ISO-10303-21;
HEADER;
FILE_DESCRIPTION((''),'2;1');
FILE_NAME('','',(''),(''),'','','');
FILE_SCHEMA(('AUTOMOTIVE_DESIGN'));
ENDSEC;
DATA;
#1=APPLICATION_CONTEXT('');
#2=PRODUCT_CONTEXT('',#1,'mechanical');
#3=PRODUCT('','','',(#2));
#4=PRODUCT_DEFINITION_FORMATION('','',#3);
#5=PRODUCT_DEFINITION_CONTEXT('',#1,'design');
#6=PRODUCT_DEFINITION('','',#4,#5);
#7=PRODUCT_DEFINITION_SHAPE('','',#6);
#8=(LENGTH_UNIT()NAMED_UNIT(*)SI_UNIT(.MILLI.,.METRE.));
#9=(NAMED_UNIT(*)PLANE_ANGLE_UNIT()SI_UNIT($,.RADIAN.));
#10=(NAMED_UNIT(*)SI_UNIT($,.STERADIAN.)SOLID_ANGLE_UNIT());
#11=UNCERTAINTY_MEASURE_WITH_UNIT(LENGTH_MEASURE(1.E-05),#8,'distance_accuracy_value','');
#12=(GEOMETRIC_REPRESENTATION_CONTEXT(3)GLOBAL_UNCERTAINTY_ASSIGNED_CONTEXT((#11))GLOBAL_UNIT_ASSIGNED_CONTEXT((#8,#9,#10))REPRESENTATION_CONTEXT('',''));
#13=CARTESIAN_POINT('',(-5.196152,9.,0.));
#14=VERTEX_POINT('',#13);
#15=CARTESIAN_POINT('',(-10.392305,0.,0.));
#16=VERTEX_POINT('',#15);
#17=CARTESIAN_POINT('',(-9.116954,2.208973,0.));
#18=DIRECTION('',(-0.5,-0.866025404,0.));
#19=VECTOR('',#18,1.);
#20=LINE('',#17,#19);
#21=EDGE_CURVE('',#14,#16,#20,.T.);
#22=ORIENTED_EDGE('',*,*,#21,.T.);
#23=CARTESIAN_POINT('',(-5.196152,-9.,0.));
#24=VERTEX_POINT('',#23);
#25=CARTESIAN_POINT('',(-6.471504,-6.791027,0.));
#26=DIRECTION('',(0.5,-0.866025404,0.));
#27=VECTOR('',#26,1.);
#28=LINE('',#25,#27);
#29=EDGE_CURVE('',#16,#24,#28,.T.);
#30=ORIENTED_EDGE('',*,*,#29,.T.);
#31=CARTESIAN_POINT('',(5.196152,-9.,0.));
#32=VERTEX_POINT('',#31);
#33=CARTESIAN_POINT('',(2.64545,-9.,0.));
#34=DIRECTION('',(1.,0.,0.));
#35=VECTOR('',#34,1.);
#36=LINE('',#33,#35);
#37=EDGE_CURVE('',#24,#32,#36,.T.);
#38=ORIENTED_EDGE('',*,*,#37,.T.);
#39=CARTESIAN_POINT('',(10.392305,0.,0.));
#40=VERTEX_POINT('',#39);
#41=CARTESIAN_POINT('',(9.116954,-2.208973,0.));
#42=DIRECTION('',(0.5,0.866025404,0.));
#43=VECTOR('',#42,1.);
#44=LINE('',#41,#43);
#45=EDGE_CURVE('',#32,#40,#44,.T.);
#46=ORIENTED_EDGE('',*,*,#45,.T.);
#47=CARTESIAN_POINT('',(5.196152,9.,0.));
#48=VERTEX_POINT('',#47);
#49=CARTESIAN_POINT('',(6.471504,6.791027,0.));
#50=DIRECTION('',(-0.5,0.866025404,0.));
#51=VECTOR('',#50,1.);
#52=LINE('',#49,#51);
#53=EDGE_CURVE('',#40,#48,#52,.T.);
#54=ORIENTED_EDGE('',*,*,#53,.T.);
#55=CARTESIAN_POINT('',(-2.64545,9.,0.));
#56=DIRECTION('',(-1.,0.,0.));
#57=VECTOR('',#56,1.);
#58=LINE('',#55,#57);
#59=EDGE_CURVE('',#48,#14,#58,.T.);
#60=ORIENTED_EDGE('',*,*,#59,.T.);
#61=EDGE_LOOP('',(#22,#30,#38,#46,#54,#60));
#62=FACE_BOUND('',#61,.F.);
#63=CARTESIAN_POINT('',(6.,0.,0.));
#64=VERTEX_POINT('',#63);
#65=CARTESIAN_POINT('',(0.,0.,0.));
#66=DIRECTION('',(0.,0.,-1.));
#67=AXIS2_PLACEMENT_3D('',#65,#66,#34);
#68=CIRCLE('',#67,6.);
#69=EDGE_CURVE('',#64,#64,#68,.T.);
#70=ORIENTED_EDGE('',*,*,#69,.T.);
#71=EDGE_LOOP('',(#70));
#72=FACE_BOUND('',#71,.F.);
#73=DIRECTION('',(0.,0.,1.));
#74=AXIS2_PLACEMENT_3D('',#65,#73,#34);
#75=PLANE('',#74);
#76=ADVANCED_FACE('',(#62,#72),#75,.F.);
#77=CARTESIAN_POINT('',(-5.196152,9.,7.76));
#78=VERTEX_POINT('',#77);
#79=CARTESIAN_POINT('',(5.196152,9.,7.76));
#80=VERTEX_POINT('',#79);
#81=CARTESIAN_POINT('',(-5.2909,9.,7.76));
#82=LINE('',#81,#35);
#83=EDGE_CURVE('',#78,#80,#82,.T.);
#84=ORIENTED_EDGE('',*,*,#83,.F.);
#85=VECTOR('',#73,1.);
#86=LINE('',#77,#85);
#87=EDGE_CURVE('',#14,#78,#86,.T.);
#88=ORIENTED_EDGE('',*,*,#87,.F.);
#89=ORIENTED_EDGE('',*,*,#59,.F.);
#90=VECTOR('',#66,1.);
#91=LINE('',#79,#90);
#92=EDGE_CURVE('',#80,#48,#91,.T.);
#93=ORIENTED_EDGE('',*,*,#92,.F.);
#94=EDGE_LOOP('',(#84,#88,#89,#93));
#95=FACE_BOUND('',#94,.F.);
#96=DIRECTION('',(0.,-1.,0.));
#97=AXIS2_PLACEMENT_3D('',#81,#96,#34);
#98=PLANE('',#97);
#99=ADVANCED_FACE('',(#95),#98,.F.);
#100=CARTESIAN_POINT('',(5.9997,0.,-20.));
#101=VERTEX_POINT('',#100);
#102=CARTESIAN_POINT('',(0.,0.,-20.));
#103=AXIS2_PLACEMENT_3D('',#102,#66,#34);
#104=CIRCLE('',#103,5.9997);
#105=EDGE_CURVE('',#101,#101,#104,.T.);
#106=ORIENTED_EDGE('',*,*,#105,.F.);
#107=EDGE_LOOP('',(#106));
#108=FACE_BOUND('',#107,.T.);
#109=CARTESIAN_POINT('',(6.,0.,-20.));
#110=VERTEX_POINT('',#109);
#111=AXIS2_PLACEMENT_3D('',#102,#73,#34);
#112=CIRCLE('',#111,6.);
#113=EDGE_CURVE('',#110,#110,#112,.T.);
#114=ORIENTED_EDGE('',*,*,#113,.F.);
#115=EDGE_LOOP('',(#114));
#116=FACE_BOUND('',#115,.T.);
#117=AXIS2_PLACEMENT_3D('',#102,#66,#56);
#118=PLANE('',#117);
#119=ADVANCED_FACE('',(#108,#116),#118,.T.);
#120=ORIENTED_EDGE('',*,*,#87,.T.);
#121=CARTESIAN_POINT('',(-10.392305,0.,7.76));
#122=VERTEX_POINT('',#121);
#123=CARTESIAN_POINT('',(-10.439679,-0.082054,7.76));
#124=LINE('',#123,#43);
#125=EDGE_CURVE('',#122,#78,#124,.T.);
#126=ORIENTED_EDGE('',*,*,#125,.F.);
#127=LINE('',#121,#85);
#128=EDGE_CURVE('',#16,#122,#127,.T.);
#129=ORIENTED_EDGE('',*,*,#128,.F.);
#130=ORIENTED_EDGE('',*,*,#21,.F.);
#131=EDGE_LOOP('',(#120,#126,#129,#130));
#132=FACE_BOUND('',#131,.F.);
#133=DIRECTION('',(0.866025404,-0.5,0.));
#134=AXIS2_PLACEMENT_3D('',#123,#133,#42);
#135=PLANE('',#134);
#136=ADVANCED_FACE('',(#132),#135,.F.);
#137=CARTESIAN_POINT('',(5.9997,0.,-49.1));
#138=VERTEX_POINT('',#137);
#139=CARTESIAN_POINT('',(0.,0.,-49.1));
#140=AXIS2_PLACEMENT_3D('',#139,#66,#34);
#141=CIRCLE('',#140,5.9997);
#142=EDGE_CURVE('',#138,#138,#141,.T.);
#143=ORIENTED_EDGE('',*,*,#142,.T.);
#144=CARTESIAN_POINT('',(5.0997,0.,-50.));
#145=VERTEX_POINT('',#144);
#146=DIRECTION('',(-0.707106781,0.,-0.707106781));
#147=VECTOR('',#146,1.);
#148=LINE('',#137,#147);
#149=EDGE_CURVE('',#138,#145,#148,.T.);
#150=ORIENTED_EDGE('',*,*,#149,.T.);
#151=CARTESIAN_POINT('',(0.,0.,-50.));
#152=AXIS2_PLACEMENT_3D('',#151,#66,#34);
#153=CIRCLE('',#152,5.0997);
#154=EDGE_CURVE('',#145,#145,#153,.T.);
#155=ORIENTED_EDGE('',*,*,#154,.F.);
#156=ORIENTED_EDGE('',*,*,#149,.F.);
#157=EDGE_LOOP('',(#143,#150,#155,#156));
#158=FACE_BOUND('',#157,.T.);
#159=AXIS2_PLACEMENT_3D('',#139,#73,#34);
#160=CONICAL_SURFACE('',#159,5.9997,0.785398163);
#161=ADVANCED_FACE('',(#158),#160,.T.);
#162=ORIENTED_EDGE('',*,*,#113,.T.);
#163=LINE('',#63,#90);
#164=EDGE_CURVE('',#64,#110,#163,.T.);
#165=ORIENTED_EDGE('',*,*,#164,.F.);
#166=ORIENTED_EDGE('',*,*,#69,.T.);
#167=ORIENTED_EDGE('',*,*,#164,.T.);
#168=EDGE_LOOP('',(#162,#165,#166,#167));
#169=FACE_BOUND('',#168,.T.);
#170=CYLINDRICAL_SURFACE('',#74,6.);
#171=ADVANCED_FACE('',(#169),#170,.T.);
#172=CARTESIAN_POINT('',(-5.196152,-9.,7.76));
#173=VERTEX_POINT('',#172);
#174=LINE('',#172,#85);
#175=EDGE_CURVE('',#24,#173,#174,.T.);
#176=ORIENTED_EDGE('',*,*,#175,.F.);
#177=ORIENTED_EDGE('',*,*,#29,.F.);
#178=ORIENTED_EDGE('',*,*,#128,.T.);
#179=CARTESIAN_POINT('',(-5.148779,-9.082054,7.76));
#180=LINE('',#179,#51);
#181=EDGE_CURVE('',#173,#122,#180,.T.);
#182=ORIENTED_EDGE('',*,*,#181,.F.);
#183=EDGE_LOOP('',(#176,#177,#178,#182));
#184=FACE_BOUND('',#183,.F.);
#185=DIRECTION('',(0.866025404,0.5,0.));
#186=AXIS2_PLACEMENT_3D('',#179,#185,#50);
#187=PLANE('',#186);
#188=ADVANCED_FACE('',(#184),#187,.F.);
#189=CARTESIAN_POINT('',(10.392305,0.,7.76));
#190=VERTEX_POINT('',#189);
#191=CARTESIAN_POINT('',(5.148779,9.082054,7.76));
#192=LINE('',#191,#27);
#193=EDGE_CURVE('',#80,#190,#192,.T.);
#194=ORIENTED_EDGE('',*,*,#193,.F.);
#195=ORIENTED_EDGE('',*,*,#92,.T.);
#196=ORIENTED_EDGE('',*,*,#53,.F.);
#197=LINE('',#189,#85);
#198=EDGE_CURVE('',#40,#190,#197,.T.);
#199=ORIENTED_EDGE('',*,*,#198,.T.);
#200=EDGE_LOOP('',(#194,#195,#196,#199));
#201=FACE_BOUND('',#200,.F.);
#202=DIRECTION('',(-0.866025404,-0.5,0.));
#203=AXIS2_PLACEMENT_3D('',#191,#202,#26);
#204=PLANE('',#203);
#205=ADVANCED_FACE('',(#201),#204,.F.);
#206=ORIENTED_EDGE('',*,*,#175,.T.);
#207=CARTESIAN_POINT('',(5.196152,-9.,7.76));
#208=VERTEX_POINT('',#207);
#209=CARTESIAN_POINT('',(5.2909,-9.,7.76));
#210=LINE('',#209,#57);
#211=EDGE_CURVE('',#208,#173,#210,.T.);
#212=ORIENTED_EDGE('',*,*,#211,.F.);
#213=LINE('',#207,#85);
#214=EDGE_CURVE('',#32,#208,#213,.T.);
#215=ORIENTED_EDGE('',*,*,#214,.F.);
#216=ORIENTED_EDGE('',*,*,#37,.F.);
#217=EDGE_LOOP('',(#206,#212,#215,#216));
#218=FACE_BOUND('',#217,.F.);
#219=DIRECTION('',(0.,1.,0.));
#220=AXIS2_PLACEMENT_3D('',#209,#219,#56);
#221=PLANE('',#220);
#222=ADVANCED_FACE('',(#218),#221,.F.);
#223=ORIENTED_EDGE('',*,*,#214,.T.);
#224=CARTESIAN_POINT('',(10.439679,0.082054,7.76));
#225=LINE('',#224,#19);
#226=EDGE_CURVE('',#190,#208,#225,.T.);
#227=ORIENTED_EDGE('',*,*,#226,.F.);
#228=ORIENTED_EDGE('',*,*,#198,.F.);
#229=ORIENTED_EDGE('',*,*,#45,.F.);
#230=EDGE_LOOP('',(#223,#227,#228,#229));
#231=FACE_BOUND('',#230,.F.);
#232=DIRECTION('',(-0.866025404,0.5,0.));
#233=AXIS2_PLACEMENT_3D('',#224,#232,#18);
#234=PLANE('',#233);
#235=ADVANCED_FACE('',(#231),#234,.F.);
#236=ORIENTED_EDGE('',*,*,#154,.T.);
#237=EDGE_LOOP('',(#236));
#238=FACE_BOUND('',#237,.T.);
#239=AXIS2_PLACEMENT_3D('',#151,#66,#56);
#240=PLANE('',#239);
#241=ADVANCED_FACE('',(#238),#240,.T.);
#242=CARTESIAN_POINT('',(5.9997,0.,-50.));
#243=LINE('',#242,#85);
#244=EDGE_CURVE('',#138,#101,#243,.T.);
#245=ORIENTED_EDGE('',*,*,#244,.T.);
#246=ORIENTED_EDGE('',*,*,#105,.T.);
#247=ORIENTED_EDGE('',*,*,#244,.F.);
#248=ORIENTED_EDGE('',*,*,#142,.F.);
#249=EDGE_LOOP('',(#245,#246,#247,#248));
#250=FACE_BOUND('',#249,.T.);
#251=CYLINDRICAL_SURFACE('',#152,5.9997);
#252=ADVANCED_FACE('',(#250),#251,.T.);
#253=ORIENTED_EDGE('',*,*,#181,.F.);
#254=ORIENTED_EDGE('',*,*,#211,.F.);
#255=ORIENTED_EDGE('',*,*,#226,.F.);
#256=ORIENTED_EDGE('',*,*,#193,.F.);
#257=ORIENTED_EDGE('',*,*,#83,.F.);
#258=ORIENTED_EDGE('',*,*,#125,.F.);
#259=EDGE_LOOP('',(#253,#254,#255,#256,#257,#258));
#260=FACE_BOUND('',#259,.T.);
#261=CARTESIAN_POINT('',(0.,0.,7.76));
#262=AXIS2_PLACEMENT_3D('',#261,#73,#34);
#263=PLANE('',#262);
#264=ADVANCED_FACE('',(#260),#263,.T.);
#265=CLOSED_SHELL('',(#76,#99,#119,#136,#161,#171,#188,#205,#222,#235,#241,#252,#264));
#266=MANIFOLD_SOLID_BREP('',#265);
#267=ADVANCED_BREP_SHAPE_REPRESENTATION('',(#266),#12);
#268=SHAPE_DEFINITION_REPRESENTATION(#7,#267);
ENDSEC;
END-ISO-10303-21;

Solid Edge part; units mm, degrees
sketch "Sketch1" plane through (0, 0, 0) normal (0, 0, 1) x (1, 0, 0)
  circle A0 centre (0, 0) radius 10.44
  dimension "D1" = 20.88
extrude "Protrusion1" add sketch "Sketch1" along normal blind 7.76
sketch "Sketch2" plane through (0, 0, 0) normal (0, 0, -1) x (1, 0, 0)
  circle A0 centre (0, 0) radius 6
extrude "Protrusion2" add sketch "Sketch2" along normal blind 50
sketch "Sketch3" plane through (0, 0, -50) normal (0, 0, -1) x (1, 0, 0)
  circle A0 centre (0, 0) radius 5.9997
extrude "Cutout1" cut sketch "Sketch3" against normal blind 30 flip side to cut
chamfer "Chamfer_1" distance 0.9 angle 45 1 edges at (-5.9997, 0, -50)
sketch "Sketch4" plane through (0, 0, 7.76) normal (0, 0, 1) x (1, 0, 0)
  line L0 (-5.2909, 9) -> (5.2909, 9)
  dimension "D1" = 18
extrude "Cutout2" cut sketch "Sketch4" against normal up to next material side at (0, 9.05, 7.76)
pattern_circular "Pattern1" count 6 over 360 about axis through (0, 0, 7.76) along (0, 0, 1) of "Cutout2"
properties part number "24101070"
